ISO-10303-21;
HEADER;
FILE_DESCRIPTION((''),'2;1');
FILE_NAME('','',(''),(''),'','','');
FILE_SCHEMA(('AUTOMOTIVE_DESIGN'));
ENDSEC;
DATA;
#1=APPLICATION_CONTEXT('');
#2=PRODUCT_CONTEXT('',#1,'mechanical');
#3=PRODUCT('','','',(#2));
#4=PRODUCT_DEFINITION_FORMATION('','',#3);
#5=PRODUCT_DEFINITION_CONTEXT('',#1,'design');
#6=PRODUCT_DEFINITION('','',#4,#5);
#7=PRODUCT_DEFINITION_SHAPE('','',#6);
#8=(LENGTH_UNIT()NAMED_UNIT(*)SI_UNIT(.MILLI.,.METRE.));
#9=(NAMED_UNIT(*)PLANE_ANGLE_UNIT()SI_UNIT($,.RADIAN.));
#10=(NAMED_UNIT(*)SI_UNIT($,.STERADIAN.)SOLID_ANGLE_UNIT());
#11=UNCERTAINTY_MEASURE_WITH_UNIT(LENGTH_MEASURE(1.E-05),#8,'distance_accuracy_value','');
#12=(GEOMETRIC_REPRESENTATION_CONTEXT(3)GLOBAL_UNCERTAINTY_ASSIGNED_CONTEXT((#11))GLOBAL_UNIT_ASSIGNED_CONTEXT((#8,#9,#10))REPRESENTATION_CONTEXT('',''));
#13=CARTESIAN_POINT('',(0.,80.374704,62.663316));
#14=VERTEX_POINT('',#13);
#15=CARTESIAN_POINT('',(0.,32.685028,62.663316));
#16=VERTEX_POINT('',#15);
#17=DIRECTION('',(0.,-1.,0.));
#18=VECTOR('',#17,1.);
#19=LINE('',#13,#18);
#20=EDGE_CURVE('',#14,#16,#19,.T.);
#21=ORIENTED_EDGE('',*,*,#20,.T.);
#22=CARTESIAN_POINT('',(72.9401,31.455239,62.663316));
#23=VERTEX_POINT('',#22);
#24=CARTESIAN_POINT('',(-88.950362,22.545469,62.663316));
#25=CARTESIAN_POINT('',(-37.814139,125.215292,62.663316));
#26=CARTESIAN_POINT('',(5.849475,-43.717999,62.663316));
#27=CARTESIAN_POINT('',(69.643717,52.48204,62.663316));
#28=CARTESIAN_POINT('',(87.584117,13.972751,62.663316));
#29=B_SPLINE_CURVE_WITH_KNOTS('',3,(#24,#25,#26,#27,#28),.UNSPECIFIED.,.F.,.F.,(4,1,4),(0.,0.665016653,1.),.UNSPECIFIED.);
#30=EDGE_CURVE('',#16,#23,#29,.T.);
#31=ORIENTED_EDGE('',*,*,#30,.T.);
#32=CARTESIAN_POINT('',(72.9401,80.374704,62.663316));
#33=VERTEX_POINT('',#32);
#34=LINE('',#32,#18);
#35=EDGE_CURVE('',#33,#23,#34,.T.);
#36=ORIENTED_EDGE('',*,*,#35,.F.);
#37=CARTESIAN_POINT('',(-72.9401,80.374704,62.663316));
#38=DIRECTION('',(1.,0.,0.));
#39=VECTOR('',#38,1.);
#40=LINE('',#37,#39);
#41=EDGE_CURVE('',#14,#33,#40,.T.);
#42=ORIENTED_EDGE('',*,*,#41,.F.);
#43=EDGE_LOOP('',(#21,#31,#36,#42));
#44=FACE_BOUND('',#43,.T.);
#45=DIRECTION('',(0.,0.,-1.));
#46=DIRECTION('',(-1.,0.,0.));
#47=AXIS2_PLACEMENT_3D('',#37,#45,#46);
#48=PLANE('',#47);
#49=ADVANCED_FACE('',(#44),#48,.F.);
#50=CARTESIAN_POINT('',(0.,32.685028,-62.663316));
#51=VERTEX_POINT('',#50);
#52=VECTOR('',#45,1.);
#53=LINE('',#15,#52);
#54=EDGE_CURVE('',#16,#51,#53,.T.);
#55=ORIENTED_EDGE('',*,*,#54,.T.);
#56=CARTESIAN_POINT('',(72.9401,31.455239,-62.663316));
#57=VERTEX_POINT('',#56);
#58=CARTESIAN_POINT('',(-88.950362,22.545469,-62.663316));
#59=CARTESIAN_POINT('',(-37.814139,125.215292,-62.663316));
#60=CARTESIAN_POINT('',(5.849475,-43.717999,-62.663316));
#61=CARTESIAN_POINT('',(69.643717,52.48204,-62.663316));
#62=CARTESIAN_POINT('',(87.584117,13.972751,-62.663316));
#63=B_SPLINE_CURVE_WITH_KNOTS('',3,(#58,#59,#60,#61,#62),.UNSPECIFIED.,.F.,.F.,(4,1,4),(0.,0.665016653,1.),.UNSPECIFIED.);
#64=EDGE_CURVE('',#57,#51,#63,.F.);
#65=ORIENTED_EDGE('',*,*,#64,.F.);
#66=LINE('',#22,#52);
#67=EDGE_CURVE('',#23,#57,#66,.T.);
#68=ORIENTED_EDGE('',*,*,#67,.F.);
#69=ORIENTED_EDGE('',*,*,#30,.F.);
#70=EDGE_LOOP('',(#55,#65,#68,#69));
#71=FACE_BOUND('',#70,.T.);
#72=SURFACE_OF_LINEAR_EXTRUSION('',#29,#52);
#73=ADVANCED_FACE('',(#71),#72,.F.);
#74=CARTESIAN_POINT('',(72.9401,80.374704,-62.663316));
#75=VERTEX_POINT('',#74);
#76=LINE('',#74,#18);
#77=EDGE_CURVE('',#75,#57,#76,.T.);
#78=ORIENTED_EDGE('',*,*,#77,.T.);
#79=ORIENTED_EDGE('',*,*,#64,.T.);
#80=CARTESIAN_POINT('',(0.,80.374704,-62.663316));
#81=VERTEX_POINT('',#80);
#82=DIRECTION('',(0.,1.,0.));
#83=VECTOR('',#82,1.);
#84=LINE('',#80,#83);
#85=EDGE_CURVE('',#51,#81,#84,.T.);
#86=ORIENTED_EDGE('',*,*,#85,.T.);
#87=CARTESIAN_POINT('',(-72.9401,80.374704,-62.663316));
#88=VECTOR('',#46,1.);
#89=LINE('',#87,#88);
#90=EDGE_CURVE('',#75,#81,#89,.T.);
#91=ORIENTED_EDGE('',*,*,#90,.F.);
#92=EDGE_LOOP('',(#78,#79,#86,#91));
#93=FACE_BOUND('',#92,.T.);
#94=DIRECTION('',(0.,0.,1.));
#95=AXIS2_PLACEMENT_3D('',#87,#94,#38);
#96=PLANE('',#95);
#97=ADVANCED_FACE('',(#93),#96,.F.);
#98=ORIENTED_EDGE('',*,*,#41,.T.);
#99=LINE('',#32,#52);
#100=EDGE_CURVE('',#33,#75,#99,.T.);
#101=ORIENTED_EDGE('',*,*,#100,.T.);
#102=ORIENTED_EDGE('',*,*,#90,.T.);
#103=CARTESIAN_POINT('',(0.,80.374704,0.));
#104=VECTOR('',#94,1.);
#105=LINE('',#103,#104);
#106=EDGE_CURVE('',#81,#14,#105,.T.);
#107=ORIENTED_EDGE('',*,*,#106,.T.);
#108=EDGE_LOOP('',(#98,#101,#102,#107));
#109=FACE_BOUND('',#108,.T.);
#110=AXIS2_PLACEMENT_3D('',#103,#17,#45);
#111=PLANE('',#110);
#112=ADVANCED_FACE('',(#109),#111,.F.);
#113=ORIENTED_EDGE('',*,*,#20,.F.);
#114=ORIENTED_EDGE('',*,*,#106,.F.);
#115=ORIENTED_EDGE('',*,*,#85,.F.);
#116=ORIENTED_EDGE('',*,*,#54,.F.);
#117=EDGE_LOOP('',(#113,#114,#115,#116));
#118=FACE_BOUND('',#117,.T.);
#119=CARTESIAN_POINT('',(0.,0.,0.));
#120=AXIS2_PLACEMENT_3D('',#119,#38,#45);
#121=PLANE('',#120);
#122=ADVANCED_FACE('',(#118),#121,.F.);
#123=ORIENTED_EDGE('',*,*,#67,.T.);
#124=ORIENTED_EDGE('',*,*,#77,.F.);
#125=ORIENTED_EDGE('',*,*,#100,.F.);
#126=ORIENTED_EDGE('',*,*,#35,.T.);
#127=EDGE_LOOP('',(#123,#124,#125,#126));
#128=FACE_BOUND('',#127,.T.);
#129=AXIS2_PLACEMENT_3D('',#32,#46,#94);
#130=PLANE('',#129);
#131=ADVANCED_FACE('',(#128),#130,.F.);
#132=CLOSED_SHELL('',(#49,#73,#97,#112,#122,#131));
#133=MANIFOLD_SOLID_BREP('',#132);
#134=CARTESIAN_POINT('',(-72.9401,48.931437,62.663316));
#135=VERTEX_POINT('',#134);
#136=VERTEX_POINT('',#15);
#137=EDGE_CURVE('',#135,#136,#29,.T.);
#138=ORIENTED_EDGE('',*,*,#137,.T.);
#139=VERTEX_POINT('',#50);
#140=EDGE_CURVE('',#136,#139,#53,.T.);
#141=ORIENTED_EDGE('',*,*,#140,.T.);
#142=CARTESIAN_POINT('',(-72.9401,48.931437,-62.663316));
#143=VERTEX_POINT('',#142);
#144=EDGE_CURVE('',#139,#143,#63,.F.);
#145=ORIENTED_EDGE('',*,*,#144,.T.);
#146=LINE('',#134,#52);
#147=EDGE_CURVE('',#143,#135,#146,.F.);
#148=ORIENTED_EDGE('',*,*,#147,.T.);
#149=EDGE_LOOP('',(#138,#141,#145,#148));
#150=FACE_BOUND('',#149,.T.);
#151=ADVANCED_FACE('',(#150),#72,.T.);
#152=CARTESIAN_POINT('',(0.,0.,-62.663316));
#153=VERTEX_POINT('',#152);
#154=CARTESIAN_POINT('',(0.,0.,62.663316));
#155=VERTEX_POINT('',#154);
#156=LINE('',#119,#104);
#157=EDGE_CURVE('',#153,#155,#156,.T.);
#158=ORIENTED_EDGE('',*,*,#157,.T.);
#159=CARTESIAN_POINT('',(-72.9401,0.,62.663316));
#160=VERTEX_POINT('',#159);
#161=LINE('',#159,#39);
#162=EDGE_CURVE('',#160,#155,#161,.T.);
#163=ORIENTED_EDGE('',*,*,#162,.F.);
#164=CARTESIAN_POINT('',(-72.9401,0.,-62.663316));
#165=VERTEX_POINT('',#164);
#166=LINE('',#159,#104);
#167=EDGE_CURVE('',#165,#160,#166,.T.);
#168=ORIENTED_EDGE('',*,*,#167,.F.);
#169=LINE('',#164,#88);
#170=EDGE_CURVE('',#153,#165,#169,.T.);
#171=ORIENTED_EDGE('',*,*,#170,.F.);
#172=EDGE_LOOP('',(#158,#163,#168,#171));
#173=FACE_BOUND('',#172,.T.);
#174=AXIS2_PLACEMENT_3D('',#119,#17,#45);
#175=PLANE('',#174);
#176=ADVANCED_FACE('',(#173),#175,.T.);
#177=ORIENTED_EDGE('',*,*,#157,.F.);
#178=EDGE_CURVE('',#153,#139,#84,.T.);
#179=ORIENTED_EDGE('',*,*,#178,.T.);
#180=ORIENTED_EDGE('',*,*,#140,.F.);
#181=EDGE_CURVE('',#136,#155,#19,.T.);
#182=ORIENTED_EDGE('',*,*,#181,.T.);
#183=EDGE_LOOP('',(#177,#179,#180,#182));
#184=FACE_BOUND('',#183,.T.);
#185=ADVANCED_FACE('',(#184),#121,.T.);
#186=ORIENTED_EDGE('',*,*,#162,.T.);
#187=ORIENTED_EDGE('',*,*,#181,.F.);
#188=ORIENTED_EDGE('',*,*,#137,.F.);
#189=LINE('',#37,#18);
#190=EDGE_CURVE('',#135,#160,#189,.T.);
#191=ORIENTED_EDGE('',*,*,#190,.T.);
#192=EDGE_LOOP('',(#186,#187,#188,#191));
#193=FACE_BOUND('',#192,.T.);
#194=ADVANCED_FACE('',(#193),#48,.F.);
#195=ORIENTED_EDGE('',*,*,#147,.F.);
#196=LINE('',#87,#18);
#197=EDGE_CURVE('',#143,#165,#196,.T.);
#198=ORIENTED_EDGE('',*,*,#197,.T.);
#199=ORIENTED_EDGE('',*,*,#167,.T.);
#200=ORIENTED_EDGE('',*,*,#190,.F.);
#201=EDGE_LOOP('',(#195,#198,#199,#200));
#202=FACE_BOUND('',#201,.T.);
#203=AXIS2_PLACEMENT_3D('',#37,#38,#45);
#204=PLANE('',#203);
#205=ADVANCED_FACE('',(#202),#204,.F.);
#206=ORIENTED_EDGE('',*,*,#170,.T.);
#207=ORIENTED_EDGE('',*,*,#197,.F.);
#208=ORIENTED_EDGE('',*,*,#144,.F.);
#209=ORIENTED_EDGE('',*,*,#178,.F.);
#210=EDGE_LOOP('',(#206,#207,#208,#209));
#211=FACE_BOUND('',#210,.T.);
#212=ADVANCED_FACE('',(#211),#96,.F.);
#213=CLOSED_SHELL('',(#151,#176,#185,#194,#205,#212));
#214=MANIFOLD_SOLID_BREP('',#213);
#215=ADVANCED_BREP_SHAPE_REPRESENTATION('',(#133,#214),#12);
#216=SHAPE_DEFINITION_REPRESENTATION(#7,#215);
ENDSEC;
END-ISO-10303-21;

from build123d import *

# Parameters (mm, degrees)
SKETCH1_W           = 145.880200278
SKETCH1_H           = 125.32663254
BOSS_EXTRUDE1_DEPTH = 80.374704292
INTERSECT1_START    = -62.66331627
INTERSECT1_DEPTH    = 125.32663254


# Read off the part's stored shape, not the designer's step: Intersect1
with BuildPart() as part:
    # Sketch1 → Boss-Extrude1 (new body)
    with BuildSketch(Plane(origin=(0, 0, 0), x_dir=(1, 0, 0), z_dir=(0, 1, 0))):
        Rectangle(SKETCH1_W, SKETCH1_H)
    extrude(amount=BOSS_EXTRUDE1_DEPTH)

    # Intersect1 outline → Intersect1 (cut)
    with BuildSketch(Plane.XY.offset(INTERSECT1_START)):
        with BuildLine():
            Line((-72.940100139, 80.374704292), (-72.940100139, 48.931437063))
            add(Edge.make_bspline(
                [(-72.940100139, 48.931437063), (-43.863738313, 86.090121594), (-22.048252395, 53.903227083), (0, 32.685028068)],
                knots=[0.072658952, 0.072658952, 0.072658952, 0.072658952, 0.486913588, 0.486913588, 0.486913588, 0.486913588], degree=3))
            Line((0, 32.685028068), (0, 80.374704292))
            Line((0, 80.374704292), (-72.940100139, 80.374704292))
        make_face()
        with BuildLine():
            add(Edge.make_bspline(
                [(0, 32.685028068), (9.479341915, 23.562556152), (32.238180531, 6.605314214), (58.644645951, 37.689666929), (72.940100139, 31.455238757)],
                knots=[0.486913588, 0.486913588, 0.486913588, 0.486913588, 0.665016653, 0.912587019, 0.912587019, 0.912587019, 0.912587019], degree=3))
            Line((0, 32.685028068), (0, 0))
            Line((0, 0), (72.940100139, 0))
            Line((72.940100139, 0), (72.940100139, 31.455238757))
        make_face()
    extrude(amount=INTERSECT1_DEPTH, mode=Mode.SUBTRACT)


solid = part.part
